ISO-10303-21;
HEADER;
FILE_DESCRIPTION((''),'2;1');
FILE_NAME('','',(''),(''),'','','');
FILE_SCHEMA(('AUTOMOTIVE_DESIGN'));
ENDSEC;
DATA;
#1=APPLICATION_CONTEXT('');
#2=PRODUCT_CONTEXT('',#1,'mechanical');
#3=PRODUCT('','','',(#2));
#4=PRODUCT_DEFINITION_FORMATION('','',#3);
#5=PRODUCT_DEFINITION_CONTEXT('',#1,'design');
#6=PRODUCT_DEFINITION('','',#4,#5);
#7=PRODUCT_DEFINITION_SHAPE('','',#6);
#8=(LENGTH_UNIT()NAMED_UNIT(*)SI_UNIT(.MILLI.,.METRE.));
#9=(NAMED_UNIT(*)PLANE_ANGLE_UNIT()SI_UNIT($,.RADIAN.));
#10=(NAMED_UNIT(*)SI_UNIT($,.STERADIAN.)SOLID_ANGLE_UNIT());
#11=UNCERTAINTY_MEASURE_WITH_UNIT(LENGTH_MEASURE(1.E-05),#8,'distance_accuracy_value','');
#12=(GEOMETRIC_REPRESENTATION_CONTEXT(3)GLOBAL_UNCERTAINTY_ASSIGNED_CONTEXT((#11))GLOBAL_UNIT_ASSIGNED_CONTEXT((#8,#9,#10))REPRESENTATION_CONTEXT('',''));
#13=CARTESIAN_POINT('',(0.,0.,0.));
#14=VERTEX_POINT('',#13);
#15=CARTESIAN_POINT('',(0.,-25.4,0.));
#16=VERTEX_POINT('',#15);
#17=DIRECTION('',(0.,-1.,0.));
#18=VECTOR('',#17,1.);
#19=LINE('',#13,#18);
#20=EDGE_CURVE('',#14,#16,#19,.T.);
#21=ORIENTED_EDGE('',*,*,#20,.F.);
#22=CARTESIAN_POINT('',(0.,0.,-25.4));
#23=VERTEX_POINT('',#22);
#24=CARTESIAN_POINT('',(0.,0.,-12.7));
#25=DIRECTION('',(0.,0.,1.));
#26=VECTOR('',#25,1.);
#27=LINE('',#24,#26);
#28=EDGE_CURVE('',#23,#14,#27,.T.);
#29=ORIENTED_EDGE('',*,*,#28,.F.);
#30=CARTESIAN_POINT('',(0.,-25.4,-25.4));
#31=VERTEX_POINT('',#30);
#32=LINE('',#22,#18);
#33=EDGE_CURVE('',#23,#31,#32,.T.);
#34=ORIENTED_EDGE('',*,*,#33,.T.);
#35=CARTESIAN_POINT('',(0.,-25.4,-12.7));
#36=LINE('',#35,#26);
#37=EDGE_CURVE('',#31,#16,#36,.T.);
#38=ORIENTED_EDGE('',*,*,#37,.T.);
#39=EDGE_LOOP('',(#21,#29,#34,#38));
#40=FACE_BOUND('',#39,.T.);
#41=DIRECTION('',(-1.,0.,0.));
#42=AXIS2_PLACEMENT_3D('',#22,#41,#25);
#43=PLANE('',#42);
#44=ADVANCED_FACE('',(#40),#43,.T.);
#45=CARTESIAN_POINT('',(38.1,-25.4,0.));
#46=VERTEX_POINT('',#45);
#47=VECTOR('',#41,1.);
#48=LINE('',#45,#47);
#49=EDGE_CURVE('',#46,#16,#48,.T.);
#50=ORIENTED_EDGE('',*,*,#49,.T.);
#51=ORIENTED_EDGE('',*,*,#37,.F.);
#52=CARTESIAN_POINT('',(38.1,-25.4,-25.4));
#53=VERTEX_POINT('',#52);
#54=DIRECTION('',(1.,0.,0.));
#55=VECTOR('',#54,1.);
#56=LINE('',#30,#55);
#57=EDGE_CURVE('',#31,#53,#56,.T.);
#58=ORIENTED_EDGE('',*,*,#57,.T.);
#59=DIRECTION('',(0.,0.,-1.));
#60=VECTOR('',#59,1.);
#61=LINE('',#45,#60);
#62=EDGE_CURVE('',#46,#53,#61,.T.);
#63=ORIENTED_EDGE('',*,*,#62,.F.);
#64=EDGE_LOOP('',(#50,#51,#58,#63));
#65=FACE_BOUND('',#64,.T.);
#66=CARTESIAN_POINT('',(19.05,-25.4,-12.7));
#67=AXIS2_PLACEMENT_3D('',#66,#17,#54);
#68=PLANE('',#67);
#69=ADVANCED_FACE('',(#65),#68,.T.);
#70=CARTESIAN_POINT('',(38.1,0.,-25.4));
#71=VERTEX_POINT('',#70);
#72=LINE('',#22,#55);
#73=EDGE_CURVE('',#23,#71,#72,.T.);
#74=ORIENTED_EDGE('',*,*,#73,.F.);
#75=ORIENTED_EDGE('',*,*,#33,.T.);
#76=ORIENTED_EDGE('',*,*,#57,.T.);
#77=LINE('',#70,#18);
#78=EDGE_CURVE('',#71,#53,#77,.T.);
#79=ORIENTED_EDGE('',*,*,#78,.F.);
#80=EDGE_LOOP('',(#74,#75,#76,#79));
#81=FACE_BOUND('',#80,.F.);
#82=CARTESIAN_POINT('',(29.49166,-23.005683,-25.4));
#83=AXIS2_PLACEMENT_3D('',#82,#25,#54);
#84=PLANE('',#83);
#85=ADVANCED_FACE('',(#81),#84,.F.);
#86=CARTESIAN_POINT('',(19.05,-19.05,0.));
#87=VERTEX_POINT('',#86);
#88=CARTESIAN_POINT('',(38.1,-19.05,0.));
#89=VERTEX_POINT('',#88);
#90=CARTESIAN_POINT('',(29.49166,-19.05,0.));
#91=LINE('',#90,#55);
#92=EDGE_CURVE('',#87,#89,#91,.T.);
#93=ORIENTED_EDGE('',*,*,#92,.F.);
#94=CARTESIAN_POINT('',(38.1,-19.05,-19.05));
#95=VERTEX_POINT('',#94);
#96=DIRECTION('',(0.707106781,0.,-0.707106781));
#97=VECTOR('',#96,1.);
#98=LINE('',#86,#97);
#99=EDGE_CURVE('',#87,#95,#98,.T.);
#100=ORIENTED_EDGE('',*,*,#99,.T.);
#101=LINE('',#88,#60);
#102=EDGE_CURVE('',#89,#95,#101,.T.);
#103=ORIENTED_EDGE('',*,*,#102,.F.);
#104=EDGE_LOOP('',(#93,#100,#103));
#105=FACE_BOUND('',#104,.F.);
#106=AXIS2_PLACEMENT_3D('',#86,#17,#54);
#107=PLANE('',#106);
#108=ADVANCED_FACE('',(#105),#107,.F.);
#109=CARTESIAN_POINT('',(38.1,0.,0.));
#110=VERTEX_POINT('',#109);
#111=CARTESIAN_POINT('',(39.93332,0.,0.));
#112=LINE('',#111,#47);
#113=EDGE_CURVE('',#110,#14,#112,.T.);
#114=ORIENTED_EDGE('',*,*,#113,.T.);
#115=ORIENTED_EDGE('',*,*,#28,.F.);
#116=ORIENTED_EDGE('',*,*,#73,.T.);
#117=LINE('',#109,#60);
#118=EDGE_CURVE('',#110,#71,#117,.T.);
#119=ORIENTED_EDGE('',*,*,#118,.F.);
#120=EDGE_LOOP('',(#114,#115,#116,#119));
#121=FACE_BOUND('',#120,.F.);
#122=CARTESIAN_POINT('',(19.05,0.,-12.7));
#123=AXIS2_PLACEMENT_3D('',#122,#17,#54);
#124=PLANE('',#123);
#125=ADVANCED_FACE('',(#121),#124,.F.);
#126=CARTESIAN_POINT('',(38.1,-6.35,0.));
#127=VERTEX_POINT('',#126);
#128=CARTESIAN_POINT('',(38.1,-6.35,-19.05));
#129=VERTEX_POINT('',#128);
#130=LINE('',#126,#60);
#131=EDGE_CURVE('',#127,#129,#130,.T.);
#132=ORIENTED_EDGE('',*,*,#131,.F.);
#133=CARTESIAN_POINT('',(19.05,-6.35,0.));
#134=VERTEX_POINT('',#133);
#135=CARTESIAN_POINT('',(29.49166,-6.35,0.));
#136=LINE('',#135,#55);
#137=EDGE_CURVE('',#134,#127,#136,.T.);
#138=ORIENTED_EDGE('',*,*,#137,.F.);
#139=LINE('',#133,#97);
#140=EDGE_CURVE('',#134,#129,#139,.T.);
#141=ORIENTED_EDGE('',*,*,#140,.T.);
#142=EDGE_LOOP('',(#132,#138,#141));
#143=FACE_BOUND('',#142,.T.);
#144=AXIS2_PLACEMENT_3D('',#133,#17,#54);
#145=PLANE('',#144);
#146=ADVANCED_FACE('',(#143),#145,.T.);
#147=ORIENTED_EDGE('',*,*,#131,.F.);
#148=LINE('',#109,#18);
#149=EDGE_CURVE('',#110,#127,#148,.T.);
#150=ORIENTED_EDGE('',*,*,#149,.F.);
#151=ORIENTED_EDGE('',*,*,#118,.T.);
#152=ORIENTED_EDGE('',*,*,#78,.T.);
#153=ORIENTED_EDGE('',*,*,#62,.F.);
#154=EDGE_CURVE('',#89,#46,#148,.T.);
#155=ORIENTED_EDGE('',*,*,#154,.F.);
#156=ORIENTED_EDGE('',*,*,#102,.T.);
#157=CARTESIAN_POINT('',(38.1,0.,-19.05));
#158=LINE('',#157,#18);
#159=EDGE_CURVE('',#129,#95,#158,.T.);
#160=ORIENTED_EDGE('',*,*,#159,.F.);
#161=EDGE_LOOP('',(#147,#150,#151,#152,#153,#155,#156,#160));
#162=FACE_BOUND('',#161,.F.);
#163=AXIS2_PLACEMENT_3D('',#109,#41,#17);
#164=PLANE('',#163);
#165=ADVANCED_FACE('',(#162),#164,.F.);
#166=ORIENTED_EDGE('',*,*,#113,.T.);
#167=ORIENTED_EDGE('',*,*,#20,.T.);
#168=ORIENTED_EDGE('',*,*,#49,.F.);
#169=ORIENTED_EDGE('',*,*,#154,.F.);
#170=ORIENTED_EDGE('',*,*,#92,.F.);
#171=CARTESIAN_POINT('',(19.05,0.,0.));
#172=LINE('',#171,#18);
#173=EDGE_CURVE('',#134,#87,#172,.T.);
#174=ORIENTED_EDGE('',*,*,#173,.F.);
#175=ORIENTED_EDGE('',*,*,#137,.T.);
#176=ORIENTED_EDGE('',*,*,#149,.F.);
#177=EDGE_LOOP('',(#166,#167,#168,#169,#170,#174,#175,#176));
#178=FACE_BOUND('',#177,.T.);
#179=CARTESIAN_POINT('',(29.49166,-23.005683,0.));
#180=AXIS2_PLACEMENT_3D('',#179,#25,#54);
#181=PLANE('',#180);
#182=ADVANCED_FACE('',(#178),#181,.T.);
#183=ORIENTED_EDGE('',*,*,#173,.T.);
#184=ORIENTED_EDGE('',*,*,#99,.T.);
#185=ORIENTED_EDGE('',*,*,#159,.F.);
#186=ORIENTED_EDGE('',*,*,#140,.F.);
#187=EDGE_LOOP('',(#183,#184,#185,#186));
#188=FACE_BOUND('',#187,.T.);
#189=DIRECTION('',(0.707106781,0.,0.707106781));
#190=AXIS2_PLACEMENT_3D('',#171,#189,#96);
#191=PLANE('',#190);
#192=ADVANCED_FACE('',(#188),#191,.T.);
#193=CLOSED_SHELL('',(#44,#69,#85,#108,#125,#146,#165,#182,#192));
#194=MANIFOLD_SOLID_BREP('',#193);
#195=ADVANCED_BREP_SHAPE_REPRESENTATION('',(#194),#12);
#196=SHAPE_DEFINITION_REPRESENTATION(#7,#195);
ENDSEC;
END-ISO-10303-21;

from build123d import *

# Parameters (mm, degrees)
F0_W      = 38.1
F0_H      = 25.4
F1_DEPTH  = 25.4
F3_DEPTH  = 25.401
F4_W      = 20.8833201349
F4_H      = 7.9113657147
F4_H_2    = 6.35
F5_DEPTH  = 25.4
F7_DEPTH  = 25.4
F10_W     = 2.4862326682
F10_H     = 25.8971806616
F11_DEPTH = 26.9623657147


# Not quite as in the source:
# - a feature of the source that left no trace in its solid (it failed there, or was rolled back) is left out


with BuildPart() as f1:
    # F0 (on Front) → F1 (new body)
    with BuildSketch(Plane.XZ):
        with Locations((19.05, -12.7)):
            Rectangle(F0_W, F0_H)
    extrude(amount=F1_DEPTH)

    # F2 (on Front) → F3 (cut, through all)
    with BuildSketch(Plane.XZ):
        Polygon((38.1, 0), (19.05, 0), (38.1, -19.05), align=None)
    extrude(amount=F3_DEPTH, mode=Mode.SUBTRACT)

    # F4 (on Top) → F5 (join)
    with BuildSketch(Plane.XY):
        with Locations((29.4916600674, -23.0056828573)):
            Rectangle(F4_W, F4_H)
        with Locations((29.4916600674, -3.175)):
            Rectangle(F4_W, F4_H_2)
    extrude(amount=-F5_DEPTH)

    # F6 (on Top) → F7 (cut)
    with BuildSketch(Plane.XY):
        Polygon((38.1, -25.4), (18.3193590492, -25.4), (18.3193590492, -27.6306644082), (39.8231558502, -27.6306644082), (39.8231558502, 0), (38.1, 0), align=None)
    extrude(amount=-F7_DEPTH, mode=Mode.SUBTRACT)

    # F10 (on Front) → F11 (cut, through all)
    with BuildSketch(Plane.XZ):
        with Locations((40.0636065751, -12.9485903308)):
            Rectangle(F10_W, F10_H)
    extrude(amount=F11_DEPTH, mode=Mode.SUBTRACT)


solid = f1.part
